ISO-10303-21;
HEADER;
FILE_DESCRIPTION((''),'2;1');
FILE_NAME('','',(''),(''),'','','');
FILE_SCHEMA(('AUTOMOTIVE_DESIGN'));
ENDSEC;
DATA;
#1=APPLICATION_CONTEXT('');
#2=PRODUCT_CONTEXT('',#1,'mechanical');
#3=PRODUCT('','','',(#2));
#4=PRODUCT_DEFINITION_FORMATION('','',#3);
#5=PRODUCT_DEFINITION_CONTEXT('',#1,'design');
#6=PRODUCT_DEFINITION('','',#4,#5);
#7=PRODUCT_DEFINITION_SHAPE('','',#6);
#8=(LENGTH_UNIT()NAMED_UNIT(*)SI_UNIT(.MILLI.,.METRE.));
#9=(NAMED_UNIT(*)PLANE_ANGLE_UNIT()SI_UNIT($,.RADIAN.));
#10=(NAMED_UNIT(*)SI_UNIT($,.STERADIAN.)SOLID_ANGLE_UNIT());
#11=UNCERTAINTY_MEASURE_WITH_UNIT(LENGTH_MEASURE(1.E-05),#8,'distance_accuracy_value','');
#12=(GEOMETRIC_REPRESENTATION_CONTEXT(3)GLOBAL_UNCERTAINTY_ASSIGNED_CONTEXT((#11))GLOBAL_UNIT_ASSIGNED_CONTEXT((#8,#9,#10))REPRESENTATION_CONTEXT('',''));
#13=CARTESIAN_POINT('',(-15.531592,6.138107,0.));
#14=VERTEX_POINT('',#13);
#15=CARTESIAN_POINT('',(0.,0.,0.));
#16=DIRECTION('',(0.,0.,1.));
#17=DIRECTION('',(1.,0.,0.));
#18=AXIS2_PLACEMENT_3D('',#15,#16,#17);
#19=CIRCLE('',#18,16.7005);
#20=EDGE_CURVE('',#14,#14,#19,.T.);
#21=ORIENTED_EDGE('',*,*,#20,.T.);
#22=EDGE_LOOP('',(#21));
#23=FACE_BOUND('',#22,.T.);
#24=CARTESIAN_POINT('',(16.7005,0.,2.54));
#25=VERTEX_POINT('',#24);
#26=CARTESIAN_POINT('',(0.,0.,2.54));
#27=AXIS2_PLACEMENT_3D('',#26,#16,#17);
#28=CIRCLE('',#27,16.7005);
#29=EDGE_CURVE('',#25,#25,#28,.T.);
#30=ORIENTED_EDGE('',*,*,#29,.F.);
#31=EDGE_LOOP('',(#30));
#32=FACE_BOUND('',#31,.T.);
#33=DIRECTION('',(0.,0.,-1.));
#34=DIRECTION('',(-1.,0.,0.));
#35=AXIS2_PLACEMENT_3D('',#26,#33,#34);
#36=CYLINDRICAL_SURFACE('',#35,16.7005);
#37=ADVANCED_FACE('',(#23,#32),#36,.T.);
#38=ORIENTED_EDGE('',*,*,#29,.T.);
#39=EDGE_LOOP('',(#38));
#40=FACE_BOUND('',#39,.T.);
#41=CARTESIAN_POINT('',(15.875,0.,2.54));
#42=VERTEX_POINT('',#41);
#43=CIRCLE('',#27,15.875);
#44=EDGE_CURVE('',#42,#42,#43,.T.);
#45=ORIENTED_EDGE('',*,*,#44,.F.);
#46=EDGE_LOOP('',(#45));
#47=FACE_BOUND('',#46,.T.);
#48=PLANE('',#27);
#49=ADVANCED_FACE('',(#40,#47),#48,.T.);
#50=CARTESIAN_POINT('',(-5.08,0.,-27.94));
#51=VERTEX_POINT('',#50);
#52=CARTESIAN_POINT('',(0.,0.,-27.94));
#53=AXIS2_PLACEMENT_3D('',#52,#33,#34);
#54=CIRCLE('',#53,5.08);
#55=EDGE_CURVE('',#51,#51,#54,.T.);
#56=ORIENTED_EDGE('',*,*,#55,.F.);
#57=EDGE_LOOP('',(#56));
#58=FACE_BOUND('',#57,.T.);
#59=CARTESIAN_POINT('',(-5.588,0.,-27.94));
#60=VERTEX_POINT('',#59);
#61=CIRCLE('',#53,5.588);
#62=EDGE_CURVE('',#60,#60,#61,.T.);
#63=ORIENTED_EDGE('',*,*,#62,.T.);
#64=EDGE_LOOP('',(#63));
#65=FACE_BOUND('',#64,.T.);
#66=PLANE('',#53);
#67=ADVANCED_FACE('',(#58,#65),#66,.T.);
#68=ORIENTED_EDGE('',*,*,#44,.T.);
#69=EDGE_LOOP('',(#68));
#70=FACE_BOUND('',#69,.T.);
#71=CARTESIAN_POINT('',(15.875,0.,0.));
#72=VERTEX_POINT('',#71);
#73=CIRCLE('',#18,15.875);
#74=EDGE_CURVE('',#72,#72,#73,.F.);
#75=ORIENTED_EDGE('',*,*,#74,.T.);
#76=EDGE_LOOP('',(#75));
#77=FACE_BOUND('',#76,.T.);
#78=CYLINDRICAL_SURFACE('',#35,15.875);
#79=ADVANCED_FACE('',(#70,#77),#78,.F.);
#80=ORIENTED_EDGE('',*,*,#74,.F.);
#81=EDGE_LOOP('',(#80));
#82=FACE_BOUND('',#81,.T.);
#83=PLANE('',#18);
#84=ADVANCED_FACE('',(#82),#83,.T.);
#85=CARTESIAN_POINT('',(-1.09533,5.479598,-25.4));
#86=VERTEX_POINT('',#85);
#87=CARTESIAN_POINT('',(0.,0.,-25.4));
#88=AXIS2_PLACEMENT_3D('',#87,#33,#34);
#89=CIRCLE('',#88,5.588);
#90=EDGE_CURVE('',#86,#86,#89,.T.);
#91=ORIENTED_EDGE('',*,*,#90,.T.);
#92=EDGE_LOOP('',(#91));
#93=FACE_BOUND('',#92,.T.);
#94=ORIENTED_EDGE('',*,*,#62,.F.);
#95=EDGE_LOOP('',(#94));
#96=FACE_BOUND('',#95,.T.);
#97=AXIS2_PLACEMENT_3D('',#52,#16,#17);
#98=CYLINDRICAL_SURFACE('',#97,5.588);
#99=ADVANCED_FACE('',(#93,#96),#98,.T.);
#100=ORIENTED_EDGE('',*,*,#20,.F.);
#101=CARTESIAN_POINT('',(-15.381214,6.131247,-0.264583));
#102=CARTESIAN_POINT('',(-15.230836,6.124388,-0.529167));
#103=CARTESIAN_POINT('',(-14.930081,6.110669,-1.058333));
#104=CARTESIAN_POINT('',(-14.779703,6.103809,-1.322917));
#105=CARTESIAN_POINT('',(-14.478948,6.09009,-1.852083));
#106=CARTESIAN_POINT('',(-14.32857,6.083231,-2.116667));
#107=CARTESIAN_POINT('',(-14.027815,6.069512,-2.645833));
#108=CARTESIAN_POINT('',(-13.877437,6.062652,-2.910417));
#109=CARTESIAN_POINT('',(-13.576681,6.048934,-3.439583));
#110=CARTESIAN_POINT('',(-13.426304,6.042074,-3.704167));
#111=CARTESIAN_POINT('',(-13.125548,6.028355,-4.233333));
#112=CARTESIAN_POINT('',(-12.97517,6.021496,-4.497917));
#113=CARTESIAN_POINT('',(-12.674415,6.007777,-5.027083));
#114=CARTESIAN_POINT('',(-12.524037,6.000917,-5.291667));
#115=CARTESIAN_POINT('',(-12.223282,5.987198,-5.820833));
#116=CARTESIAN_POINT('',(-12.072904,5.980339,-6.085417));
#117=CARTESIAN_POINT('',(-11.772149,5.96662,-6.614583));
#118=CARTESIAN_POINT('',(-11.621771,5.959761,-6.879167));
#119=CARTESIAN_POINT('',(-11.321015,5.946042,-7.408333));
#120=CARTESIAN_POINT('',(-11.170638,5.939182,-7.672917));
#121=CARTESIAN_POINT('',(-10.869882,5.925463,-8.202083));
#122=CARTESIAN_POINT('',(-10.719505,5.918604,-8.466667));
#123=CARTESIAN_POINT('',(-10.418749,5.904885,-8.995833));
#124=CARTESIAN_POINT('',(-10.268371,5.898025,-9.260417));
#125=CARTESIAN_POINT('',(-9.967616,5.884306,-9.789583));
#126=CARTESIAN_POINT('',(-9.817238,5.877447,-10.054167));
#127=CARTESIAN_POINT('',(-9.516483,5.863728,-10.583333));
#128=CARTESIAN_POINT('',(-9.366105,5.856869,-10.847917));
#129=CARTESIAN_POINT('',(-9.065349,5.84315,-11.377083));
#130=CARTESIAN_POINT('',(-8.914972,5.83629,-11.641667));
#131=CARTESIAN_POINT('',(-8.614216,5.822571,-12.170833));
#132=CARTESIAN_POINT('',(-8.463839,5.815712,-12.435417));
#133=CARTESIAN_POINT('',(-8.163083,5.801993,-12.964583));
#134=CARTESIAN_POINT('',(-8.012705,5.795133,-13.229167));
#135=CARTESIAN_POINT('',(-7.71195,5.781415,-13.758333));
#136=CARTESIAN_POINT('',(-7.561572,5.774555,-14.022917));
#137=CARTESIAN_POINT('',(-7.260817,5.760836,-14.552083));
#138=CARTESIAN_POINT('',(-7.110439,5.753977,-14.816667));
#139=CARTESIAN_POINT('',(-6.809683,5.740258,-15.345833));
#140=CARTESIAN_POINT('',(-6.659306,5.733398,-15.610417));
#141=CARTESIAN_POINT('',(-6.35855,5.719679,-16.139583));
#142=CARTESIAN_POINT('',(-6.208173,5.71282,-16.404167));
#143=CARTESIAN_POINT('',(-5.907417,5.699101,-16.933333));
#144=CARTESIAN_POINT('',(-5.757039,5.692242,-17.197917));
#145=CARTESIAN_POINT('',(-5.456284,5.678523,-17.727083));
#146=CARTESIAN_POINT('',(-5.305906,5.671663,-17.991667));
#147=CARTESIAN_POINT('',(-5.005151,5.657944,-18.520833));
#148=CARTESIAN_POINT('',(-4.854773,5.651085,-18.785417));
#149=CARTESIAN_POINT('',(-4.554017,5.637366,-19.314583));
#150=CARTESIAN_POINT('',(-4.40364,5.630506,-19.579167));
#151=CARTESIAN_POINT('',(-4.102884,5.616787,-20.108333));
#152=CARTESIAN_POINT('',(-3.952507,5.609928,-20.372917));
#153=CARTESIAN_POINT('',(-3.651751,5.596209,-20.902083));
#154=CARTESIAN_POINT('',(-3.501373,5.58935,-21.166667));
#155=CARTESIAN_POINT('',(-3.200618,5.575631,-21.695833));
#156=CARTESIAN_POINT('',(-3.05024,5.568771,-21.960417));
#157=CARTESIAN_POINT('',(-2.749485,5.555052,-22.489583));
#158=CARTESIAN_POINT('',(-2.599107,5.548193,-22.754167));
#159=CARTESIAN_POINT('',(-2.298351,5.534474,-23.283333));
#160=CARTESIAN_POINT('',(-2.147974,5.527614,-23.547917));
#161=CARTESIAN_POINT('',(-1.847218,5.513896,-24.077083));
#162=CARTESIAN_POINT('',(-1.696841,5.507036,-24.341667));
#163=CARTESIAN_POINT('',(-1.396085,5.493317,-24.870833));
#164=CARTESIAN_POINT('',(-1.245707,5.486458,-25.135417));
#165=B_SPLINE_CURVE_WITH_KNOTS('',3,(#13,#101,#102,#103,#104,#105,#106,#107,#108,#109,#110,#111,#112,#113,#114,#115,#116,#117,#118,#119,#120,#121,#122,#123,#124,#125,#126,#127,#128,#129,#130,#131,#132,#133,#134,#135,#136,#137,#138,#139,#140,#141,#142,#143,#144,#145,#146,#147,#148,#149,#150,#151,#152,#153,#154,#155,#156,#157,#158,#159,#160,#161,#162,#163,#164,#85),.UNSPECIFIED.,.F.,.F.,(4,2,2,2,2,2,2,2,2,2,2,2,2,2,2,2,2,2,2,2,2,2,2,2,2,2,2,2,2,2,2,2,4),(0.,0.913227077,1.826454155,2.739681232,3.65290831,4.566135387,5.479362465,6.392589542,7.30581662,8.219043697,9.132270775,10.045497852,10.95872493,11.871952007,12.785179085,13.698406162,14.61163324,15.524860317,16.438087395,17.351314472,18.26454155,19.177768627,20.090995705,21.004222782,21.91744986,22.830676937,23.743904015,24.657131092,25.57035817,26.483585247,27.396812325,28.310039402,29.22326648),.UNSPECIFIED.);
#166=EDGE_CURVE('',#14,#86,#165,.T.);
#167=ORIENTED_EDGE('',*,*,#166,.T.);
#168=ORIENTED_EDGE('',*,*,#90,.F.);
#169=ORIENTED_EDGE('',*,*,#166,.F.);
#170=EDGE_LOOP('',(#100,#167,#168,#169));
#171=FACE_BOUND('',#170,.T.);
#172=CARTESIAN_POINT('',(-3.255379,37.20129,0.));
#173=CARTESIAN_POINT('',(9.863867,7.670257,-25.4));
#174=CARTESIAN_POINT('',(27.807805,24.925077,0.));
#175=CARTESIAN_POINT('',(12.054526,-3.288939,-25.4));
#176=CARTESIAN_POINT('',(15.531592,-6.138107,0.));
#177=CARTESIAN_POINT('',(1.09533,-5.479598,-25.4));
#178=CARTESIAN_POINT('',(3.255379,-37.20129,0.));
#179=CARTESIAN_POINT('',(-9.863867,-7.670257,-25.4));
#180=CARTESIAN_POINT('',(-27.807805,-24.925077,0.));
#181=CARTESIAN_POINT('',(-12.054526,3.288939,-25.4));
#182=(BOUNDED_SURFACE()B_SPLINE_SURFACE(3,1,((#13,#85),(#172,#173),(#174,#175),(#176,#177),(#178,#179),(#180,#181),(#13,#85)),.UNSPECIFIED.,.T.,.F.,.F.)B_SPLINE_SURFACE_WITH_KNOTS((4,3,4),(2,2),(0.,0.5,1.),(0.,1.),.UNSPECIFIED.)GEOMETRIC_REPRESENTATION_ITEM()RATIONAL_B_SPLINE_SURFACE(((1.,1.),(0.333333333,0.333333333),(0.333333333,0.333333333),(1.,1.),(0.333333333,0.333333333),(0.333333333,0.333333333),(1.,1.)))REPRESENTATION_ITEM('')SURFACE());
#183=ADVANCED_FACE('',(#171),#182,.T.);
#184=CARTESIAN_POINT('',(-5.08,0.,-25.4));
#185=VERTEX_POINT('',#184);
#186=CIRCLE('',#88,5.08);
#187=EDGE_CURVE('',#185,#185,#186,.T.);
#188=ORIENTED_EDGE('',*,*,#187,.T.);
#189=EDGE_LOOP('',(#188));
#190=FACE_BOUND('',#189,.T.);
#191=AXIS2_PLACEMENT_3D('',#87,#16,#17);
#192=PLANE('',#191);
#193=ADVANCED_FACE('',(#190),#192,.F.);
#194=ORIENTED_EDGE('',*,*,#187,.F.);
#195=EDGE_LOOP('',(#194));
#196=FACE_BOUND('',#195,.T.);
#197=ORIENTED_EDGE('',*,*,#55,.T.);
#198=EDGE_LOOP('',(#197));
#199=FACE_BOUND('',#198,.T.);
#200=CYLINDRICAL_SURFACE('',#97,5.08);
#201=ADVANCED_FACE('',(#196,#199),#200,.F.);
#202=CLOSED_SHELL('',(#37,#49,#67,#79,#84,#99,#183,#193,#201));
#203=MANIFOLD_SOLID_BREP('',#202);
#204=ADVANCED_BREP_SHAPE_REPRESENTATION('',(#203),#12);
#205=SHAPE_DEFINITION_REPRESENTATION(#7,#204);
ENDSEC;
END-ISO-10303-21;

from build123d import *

# Parameters (mm, degrees)
SKETCH6_R           = 16.7005
SKETCH6_R_2         = 15.875
BOSS_EXTRUDE1_DEPTH = 2.54
SKETCH7_R           = 5.588
SKETCH7_R_2         = 5.08
BOSS_EXTRUDE2_DEPTH = 2.54


with BuildPart() as part:
    # Loft1: read off the stored shape, not the designer's step
    # Loft1: loft between two sections, ruled curve by curve
    loft1_from = [
        Edge.make_bspline([(-15.531591954, 6.138106517, 0), (-3.25537892, 37.201290426, 0), (27.807804989, 24.925077391, 0), (15.531591954, -6.138106517, 0), (3.25537892, -37.201290426, 0), (-27.807804989, -24.925077391, 0), (-15.531591954, 6.138106517, 0)], [0, 0, 0, 0, 0.5, 0.5, 0.5, 1, 1, 1, 1], 3, [1, 0.333333333, 0.333333333, 1, 0.333333333, 0.333333333, 1]),
    ]
    loft1_to = [
        Edge.make_bspline([(-1.095329605, 5.479598257, -25.4), (9.863866909, 7.670257467, -25.4), (12.054526119, -3.288939047, -25.4), (1.095329605, -5.479598257, -25.4), (-9.863866909, -7.670257467, -25.4), (-12.054526119, 3.288939047, -25.4), (-1.095329605, 5.479598257, -25.4)], [0, 0, 0, 0, 0.5, 0.5, 0.5, 1, 1, 1, 1], 3, [1, 0.333333333, 0.333333333, 1, 0.333333333, 0.333333333, 1]),
    ]
    loft1 = Solid(Shell([*[Face.make_surface_from_curves(loft1_from[k], loft1_to[k]) for k in range(1)], Face(Wire(loft1_from)), Face(Wire(loft1_to))]))
    add(loft1)

    # Sketch6 → Boss-Extrude1 (add)
    with BuildSketch(Plane.XY):
        with Locations(Location((0, 0, 0), (0, 0, 158.436))):
            Circle(SKETCH6_R)
        Circle(SKETCH6_R_2, mode=Mode.SUBTRACT)
    extrude(amount=BOSS_EXTRUDE1_DEPTH)

    # Sketch7 → Boss-Extrude2 (add)
    with BuildSketch(Plane(origin=(0, 0, -25.4), x_dir=(-1, 0, 0), z_dir=(0, 0, -1))):
        with Locations(Location((0, 0, 0), (0, 0, 78.696))):
            Circle(SKETCH7_R)
        Circle(SKETCH7_R_2, mode=Mode.SUBTRACT)
    extrude(amount=BOSS_EXTRUDE2_DEPTH)


solid = part.part
